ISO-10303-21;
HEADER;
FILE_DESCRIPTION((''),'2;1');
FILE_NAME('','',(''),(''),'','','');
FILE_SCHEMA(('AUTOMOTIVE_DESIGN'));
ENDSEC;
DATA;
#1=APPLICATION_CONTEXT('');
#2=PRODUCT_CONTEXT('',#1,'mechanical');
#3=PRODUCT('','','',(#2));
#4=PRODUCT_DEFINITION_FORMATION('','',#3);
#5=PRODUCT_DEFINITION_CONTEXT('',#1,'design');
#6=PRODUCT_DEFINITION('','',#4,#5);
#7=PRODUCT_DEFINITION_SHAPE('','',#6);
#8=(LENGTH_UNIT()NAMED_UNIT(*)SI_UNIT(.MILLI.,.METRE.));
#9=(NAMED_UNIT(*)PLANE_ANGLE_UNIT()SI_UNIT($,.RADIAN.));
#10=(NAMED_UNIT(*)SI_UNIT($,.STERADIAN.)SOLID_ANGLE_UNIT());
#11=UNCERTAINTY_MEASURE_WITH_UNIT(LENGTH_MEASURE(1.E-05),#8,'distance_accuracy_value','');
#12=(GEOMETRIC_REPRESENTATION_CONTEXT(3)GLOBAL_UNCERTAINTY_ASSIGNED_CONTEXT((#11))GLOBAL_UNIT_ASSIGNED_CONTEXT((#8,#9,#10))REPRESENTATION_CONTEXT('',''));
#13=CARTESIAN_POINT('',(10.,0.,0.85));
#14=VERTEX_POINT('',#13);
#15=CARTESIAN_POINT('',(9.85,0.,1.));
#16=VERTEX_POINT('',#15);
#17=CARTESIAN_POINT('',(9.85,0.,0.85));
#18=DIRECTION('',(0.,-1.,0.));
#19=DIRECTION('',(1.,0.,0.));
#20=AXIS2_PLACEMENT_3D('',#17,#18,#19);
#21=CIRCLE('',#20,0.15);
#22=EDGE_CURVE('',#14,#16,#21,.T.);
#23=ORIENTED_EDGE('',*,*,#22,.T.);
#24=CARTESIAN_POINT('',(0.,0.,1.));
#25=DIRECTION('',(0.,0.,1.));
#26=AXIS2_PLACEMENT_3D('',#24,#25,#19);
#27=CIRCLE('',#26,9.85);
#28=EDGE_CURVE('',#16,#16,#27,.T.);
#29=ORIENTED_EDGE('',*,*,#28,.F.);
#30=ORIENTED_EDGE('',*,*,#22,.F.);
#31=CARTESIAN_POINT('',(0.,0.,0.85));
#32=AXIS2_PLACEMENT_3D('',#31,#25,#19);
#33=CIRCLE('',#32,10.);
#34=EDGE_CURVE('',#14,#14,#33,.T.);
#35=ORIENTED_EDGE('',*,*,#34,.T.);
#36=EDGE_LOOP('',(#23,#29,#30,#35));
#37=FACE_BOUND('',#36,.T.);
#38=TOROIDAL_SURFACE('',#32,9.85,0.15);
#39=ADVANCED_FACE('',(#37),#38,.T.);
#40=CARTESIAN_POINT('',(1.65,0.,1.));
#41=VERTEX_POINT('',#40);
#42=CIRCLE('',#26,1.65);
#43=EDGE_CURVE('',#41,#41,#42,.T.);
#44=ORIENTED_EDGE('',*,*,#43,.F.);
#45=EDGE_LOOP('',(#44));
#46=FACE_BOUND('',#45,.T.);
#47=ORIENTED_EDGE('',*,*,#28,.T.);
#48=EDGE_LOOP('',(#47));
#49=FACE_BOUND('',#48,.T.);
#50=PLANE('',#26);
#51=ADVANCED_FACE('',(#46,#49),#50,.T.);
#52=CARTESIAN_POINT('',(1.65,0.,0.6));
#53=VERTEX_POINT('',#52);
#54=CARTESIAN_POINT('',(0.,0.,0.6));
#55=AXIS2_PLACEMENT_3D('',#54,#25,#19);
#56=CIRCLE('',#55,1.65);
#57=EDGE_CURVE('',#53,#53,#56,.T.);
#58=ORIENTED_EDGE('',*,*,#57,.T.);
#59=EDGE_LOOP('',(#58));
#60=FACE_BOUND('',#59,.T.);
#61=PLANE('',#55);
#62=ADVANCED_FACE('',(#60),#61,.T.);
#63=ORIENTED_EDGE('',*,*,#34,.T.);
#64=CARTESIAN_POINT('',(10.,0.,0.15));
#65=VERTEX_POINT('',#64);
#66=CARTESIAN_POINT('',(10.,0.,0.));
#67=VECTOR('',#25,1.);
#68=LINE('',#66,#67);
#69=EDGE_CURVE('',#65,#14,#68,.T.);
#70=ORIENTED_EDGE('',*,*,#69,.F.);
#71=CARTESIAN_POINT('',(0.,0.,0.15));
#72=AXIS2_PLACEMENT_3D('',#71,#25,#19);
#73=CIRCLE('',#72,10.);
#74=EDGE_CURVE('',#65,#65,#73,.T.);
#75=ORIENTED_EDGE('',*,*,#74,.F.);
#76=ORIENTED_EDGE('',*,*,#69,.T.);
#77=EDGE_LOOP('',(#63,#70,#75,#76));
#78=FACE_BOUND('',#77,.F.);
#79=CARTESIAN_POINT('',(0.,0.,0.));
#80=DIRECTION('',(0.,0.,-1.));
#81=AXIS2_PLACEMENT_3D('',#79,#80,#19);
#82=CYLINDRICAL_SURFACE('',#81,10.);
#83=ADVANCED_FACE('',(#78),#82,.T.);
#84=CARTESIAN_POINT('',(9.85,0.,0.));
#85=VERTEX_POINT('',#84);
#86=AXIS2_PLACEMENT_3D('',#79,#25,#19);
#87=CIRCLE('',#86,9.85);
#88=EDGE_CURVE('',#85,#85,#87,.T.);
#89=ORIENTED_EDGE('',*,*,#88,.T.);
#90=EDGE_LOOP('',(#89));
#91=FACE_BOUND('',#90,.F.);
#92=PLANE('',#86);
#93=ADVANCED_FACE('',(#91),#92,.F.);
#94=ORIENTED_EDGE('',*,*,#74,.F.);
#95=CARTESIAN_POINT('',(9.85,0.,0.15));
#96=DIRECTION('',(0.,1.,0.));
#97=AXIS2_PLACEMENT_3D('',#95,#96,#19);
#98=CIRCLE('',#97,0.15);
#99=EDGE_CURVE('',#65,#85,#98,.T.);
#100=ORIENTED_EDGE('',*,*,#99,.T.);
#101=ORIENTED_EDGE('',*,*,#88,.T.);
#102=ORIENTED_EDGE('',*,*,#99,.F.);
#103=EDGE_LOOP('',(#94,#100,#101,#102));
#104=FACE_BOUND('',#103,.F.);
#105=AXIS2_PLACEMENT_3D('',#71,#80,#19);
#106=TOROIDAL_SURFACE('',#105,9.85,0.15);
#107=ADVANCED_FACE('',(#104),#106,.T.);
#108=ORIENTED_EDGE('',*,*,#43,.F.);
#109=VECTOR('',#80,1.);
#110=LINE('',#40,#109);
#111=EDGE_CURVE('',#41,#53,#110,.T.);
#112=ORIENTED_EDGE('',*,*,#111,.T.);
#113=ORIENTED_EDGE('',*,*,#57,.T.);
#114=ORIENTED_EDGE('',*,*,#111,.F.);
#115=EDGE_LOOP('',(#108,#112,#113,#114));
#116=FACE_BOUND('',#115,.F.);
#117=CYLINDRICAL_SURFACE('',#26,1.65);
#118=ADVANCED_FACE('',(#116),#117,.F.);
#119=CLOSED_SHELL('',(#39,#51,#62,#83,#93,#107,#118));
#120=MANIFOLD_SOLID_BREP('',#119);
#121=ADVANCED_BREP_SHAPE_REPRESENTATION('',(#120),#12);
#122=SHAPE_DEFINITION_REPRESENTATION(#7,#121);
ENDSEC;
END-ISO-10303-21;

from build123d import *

# Parameters (mm, degrees)
F0_R     = 10
F1_DEPTH = 1
F2_R     = 0.15
F3_R     = 1.65
F4_DEPTH = 0.4


# Not quite as in the source:
# - a feature names something its author has since deleted; it is built from what else it names


with BuildPart() as f1:
    # F0 (on Top) → F1 (new body)
    with BuildSketch(Plane.XY):
        Circle(F0_R)
    extrude(amount=F1_DEPTH)

    # F2
    f2_edges = [f1.edges().sort_by_distance(p)[0] for p in [
        (-10, 0, 1),
        (-10, 0, 0),
    ]]
    fillet(f2_edges, radius=F2_R)

    # F3 (on face) → F4 (cut)
    with BuildSketch(Plane.XY.offset(1)):
        Circle(F3_R)
    extrude(amount=-F4_DEPTH, mode=Mode.SUBTRACT)


solid = f1.part
